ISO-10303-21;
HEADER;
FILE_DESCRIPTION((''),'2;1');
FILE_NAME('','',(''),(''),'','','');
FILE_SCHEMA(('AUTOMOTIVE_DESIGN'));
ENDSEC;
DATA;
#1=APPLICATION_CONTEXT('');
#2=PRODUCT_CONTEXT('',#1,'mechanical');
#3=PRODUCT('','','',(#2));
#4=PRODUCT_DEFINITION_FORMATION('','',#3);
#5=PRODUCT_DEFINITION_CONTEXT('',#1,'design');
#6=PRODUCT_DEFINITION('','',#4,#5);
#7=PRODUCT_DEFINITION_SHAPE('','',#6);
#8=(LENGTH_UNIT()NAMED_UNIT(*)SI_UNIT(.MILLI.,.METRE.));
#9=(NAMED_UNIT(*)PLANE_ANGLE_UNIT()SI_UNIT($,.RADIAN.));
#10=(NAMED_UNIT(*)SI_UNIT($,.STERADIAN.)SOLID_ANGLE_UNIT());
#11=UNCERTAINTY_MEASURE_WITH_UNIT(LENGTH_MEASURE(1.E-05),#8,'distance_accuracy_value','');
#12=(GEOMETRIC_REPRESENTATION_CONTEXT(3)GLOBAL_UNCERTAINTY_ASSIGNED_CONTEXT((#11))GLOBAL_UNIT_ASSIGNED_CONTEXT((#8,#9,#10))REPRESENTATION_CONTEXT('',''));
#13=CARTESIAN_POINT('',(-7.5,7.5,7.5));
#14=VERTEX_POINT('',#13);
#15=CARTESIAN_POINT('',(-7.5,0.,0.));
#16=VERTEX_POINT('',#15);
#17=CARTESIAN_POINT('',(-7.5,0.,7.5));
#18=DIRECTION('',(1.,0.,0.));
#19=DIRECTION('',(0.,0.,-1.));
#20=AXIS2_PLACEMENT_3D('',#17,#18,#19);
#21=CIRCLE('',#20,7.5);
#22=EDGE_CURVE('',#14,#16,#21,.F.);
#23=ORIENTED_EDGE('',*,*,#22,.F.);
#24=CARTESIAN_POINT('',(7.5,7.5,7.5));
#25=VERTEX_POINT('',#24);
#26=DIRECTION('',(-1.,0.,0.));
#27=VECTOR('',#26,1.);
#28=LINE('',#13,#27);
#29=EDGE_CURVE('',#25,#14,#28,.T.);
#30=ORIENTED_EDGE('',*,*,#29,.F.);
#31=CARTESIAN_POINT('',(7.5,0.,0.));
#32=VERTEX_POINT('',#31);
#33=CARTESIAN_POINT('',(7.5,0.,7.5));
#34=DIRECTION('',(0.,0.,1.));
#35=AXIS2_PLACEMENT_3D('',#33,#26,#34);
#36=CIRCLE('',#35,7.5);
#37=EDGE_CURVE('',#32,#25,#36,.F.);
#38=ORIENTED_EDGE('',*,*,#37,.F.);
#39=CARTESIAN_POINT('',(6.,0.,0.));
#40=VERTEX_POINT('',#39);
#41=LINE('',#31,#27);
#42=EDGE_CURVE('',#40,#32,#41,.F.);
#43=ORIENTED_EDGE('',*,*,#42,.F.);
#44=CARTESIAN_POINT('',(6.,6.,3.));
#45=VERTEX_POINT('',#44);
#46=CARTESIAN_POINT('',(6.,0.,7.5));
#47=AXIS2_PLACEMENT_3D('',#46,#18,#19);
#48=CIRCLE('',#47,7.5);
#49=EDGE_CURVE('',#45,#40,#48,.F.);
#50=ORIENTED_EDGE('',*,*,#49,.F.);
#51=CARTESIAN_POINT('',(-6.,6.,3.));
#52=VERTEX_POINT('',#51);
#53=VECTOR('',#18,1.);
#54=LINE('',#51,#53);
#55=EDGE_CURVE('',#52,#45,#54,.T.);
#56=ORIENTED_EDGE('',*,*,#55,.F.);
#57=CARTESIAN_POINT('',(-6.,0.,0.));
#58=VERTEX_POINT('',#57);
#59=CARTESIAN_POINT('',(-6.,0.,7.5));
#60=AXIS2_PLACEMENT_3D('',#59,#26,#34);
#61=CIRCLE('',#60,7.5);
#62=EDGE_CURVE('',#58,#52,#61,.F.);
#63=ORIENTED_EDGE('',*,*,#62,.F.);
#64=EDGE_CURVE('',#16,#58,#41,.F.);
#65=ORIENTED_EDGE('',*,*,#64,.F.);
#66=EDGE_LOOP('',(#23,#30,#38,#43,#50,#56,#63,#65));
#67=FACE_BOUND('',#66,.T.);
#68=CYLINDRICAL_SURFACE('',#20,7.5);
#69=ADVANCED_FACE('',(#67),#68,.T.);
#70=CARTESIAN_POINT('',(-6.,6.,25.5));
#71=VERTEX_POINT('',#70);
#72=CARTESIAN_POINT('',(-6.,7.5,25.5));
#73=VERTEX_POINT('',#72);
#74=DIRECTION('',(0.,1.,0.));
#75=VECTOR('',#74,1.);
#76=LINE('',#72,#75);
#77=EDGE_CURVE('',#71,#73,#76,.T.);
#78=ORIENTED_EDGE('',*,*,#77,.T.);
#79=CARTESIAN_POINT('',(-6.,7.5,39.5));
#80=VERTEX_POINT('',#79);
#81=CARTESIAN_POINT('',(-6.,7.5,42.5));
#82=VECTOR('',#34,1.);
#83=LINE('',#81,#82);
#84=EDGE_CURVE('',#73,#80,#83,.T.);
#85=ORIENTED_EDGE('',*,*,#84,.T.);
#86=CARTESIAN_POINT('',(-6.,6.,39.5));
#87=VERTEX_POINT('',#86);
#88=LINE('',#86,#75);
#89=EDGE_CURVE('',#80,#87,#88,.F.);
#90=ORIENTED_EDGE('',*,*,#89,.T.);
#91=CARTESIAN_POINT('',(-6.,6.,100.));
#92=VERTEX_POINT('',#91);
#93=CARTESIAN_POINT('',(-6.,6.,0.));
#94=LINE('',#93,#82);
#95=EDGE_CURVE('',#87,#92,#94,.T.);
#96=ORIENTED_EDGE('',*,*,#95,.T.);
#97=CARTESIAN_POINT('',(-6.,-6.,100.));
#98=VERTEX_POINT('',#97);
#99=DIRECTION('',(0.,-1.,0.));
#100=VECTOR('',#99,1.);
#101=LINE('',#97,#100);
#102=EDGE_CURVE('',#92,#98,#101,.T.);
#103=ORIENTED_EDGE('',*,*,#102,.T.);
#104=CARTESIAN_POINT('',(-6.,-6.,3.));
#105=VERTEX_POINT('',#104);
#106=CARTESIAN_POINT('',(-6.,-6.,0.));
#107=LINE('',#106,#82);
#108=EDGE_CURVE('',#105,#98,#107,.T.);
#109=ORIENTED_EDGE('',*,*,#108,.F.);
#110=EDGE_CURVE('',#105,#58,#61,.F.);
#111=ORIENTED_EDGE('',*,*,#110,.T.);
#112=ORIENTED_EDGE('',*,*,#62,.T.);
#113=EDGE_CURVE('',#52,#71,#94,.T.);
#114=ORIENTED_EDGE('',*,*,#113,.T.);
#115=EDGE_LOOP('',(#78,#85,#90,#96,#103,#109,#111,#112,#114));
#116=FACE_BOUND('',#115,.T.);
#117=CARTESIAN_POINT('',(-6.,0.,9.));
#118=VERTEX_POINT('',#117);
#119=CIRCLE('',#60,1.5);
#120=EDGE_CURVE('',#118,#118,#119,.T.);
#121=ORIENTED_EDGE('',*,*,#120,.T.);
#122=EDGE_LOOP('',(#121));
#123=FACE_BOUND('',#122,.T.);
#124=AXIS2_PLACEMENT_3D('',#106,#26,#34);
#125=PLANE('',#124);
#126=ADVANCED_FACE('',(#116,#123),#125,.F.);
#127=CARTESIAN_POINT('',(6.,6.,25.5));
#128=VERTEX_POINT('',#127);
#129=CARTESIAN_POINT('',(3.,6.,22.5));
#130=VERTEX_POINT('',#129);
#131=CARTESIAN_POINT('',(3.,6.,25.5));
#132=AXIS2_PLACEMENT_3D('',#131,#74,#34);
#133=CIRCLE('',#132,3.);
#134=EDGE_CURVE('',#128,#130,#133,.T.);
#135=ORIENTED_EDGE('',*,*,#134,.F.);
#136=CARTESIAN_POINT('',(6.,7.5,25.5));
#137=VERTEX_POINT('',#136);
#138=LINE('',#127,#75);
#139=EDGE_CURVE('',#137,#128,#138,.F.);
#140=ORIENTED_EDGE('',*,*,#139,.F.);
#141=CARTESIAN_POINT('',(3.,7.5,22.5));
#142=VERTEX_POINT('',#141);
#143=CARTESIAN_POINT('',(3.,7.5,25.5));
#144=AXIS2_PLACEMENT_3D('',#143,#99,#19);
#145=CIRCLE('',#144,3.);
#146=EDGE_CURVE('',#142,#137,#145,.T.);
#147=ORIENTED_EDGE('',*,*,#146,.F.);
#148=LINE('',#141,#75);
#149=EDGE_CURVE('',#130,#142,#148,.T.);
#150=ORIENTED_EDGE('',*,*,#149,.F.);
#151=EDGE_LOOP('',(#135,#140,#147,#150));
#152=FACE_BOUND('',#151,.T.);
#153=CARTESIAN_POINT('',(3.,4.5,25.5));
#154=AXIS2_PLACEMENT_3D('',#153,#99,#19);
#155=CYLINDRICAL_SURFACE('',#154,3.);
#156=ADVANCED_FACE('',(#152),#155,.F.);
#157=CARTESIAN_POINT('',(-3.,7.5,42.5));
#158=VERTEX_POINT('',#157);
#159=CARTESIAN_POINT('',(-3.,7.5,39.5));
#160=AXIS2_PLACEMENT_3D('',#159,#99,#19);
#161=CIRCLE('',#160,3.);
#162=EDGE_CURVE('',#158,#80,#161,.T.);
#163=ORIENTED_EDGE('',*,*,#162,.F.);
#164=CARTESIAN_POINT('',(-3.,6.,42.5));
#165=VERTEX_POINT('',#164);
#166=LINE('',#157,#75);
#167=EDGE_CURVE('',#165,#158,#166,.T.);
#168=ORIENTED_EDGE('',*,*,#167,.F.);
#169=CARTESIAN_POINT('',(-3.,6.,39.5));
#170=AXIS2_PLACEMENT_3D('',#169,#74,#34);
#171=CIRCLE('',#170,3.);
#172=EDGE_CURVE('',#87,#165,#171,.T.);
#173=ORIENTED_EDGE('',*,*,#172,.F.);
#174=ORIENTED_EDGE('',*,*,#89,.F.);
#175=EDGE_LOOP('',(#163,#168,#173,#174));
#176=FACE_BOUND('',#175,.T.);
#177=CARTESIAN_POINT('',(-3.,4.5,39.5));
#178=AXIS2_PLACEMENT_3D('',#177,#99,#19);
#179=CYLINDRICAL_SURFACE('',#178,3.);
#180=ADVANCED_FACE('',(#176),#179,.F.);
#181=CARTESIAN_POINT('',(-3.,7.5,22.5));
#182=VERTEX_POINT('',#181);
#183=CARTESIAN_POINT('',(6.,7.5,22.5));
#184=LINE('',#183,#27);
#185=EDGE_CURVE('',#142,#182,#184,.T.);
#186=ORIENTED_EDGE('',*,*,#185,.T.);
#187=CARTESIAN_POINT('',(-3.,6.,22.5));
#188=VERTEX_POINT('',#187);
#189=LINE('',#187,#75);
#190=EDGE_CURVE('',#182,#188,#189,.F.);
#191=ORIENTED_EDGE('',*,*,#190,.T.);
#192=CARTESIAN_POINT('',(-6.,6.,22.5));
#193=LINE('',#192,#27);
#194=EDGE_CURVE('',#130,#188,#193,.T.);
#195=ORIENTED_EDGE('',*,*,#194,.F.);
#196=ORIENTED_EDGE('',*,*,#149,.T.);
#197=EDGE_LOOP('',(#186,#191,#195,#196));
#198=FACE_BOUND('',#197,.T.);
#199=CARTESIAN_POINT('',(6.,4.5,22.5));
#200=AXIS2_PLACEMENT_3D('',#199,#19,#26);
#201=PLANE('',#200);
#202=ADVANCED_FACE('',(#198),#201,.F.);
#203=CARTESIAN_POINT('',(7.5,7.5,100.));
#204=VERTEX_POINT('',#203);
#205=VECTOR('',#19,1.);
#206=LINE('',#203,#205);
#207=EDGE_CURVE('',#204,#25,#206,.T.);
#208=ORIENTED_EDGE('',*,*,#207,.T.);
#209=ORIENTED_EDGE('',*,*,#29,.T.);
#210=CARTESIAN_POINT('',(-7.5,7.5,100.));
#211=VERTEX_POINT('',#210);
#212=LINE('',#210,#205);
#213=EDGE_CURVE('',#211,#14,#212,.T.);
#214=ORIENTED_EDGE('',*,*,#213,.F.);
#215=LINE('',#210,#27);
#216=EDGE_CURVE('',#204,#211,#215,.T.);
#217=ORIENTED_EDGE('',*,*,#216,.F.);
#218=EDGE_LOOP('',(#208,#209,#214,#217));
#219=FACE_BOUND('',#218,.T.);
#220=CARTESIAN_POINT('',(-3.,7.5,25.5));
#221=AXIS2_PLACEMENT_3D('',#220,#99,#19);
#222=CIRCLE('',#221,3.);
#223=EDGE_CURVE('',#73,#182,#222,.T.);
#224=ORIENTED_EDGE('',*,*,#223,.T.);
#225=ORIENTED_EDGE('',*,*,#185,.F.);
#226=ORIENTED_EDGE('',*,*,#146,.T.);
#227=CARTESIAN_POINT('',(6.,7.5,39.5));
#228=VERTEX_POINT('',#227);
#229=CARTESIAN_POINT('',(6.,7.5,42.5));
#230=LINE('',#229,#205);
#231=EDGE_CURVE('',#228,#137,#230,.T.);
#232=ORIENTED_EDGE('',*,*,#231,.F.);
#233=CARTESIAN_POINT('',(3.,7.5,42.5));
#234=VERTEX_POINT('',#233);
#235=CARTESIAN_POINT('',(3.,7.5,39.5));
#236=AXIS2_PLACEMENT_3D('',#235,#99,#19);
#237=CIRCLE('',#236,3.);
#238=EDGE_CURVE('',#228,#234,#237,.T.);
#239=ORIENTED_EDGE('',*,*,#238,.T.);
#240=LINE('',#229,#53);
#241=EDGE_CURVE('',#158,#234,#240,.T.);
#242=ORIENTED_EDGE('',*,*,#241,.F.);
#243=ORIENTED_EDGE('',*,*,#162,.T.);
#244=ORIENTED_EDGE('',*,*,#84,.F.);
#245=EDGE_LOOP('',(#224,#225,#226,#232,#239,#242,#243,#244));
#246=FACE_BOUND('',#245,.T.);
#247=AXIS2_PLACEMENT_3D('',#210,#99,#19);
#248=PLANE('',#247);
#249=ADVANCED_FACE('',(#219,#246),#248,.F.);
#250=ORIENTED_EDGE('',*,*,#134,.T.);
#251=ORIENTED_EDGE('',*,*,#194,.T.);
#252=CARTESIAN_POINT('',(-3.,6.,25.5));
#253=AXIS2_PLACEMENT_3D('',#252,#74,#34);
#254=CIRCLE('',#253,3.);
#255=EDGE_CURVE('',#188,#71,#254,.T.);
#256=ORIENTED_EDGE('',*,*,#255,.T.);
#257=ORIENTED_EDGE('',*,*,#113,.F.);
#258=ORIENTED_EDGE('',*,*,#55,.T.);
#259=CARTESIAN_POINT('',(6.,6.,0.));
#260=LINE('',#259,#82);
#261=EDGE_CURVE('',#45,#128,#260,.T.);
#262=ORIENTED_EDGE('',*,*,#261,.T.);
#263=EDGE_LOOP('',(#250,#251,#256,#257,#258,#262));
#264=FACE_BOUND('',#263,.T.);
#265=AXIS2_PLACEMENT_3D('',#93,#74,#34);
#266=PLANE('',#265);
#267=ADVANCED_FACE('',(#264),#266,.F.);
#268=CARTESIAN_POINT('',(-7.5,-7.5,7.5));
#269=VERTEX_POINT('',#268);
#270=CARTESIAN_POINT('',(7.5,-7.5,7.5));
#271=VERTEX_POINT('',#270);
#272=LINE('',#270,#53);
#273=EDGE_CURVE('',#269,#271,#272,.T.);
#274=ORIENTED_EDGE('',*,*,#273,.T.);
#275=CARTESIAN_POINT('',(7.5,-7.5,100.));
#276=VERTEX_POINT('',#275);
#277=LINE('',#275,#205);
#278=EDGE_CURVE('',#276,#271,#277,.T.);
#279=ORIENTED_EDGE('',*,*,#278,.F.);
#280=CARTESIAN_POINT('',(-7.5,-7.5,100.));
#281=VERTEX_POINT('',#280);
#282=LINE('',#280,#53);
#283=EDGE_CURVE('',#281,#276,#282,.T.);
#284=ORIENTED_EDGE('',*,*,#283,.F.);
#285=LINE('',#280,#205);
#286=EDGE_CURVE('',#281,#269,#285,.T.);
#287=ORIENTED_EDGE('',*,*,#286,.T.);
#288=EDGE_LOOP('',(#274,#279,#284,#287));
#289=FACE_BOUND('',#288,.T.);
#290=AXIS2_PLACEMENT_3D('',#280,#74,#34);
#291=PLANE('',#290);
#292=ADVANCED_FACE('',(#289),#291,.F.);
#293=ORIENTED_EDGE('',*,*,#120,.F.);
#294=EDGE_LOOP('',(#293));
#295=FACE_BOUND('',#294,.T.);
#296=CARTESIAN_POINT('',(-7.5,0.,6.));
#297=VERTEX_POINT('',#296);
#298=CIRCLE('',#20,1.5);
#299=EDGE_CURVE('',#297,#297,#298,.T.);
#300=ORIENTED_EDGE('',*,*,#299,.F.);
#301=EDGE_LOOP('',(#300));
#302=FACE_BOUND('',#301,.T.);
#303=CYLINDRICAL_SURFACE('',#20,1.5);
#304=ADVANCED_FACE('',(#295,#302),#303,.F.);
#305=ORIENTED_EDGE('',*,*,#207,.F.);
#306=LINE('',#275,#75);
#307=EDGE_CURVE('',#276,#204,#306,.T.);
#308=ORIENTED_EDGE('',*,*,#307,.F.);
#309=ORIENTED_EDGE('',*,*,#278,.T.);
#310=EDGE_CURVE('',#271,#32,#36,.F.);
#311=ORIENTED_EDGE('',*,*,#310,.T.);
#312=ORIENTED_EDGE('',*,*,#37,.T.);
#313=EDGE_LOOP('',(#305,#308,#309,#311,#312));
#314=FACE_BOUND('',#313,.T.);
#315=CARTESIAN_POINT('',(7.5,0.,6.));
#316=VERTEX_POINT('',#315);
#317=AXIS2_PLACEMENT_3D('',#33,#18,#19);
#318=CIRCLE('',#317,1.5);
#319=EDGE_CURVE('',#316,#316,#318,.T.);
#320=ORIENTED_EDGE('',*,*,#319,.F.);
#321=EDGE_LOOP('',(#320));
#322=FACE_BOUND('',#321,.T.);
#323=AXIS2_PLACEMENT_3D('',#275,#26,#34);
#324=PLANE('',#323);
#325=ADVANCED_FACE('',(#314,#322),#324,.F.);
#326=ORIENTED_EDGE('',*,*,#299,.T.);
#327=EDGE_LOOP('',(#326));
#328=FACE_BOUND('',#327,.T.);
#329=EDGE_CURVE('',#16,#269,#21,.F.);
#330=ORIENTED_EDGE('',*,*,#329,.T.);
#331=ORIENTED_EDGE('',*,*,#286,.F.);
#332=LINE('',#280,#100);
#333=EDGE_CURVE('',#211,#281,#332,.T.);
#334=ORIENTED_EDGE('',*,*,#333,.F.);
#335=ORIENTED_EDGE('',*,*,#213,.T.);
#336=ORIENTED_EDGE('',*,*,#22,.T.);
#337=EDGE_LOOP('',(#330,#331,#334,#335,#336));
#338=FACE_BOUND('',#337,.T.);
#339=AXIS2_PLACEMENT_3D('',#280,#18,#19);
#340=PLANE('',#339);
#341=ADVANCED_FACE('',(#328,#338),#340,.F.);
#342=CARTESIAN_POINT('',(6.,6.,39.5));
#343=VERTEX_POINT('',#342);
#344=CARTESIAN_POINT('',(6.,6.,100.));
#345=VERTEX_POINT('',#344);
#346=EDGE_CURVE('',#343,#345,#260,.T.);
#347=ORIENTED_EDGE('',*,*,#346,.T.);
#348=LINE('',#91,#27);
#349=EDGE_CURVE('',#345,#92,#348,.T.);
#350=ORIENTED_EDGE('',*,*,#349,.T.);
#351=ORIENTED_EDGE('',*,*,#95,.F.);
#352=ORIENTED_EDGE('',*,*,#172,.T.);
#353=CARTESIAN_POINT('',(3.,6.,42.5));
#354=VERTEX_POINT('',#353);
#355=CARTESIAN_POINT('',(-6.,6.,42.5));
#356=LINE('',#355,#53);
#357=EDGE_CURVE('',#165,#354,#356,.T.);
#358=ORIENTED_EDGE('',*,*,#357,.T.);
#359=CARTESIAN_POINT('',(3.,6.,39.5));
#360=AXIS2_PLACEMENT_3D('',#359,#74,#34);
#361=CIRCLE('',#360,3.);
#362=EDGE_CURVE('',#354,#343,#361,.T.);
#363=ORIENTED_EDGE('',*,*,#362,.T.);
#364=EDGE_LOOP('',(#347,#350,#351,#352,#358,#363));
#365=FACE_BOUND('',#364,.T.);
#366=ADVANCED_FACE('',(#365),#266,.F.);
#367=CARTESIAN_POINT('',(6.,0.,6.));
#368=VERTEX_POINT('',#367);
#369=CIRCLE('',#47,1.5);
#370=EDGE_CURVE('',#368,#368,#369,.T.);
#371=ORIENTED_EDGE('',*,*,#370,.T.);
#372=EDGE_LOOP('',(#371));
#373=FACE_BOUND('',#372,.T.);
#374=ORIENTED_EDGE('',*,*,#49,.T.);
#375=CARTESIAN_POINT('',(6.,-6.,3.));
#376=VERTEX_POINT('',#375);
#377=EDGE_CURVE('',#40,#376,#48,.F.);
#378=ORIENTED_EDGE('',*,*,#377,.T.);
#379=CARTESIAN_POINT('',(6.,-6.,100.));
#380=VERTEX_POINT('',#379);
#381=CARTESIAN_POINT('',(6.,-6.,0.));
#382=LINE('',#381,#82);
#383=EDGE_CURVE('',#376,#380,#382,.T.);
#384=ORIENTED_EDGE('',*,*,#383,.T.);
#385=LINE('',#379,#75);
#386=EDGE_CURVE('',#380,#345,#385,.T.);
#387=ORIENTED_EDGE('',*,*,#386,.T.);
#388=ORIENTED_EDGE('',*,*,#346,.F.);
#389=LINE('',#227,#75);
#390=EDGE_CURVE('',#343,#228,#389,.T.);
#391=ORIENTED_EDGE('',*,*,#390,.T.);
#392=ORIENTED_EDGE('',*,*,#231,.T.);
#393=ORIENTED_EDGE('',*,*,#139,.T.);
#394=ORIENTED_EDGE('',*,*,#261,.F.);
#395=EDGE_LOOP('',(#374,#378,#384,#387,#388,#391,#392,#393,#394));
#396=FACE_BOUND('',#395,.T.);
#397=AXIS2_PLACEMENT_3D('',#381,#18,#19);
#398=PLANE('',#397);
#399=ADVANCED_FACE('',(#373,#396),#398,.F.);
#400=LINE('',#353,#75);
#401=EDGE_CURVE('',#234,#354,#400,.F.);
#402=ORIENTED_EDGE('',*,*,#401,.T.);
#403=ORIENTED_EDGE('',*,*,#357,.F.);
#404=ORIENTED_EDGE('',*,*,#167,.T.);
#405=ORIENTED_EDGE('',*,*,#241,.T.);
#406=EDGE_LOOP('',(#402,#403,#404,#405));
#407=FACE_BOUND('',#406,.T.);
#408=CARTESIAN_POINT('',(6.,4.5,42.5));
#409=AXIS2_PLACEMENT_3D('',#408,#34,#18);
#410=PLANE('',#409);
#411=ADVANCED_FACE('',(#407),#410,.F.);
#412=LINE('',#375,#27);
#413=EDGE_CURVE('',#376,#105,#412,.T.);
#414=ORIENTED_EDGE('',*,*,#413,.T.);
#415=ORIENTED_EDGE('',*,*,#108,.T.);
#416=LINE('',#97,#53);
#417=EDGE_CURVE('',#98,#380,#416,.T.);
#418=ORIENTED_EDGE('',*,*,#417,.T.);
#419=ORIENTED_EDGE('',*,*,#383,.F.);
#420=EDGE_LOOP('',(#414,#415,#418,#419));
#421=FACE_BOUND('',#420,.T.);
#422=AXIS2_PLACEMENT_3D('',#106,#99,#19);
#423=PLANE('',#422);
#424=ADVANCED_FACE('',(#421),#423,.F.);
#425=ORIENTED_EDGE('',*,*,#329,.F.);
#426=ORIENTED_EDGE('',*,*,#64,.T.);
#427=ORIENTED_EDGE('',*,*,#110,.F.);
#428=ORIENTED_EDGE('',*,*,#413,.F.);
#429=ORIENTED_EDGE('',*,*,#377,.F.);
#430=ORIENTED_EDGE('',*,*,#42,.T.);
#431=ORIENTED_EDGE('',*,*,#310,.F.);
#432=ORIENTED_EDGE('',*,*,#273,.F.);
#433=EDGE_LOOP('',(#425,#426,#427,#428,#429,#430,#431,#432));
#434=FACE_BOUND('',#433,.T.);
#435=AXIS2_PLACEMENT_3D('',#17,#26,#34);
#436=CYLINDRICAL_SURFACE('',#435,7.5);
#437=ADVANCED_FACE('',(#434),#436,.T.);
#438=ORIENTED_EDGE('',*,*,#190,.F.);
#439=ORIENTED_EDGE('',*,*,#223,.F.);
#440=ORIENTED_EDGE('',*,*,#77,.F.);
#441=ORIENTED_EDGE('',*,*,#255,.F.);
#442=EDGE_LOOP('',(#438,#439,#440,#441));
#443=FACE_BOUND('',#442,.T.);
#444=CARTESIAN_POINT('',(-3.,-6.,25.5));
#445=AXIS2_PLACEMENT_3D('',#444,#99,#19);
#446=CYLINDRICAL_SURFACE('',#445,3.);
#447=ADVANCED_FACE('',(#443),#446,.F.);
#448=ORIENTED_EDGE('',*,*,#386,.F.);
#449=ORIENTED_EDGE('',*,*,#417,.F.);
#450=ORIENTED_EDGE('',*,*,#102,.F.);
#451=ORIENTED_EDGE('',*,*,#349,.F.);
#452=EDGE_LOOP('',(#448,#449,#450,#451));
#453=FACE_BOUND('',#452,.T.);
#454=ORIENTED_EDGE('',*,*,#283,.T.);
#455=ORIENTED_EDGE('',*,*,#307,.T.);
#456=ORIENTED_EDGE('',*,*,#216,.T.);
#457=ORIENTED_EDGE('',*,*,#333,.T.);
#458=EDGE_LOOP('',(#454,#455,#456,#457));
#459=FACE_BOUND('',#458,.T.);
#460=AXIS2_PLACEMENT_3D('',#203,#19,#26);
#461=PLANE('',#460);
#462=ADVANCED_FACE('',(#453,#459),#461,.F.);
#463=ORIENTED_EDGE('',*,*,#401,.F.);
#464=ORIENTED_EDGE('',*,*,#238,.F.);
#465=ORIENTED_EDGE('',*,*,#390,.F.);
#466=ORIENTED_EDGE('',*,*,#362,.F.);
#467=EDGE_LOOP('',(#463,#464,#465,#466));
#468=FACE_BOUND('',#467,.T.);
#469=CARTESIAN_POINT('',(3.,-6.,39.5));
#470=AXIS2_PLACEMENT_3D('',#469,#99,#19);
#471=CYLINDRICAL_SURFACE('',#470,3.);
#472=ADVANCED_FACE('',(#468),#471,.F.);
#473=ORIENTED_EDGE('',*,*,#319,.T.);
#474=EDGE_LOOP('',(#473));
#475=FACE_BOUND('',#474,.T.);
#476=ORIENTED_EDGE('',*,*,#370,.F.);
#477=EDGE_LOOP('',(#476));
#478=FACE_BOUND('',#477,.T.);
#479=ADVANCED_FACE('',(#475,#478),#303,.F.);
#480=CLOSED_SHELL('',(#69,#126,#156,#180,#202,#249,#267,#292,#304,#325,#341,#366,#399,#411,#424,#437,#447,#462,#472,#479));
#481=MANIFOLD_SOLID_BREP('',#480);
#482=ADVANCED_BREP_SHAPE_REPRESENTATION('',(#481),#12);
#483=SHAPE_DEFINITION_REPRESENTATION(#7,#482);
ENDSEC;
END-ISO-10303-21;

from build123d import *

# Parameters (mm, degrees)
ESQUISSE1_W             = 15
ESQUISSE1_H             = 15
EXTRUSION1_DEPTH        = 100
ESQUISSE2_W             = 12
ESQUISSE2_H             = 12
EXTRUSION2_DEPTH        = 101.560926806
CONG_1_R                = 7.5
ESQUISSE3_R             = 1.5
EXTRUSION3_DEPTH        = 102.396498953
ESQUISSE4_W             = 12
ESQUISSE4_H             = 20
ENL_V_MAT_EXTRU_1_DEPTH = 3
CONG_2_R                = 3


with BuildPart() as part:
    # Esquisse1 → Extrusion1 (new body)
    with BuildSketch(Plane.XY):
        Rectangle(ESQUISSE1_W, ESQUISSE1_H)
    extrude(amount=EXTRUSION1_DEPTH)

    # Esquisse2 → Extrusion2 (cut, through all)
    with BuildSketch(Plane.XY.offset(100)):
        Rectangle(ESQUISSE2_W, ESQUISSE2_H)
    extrude(amount=-EXTRUSION2_DEPTH, mode=Mode.SUBTRACT)

    # Congé1
    # the kernel refuses this fillet: 7.5 mm, written as the material it takes off along each edge
    with BuildSketch(Plane(origin=(-26.25, -7.5, 0), x_dir=(0, 0, 1), z_dir=(1, 0, 0))) as cong_1_piece_1:
        with BuildLine():
            CenterArc((CONG_1_R, -CONG_1_R), CONG_1_R, 90, 90)
            Line((0, -CONG_1_R), (0, 0))
            Line((0, 0), (CONG_1_R, 0))
        make_face()
    extrude(amount=52.5, mode=Mode.SUBTRACT)
    with BuildSketch(Plane(origin=(26.25, 7.5, 0), x_dir=(0, -1, 0), z_dir=(-1, 0, 0))) as cong_1_piece_2:
        with BuildLine():
            CenterArc((CONG_1_R, CONG_1_R), CONG_1_R, 180, 90)
            Line((0, CONG_1_R), (0, 0))
            Line((0, 0), (CONG_1_R, 0))
        make_face()
    extrude(amount=52.5, mode=Mode.SUBTRACT)

    # Esquisse3 → Extrusion3 (cut, through all)
    with BuildSketch(Plane(origin=(7.5, 0, 0), x_dir=(0, 0, -1), z_dir=(1, 0, 0))):
        with Locations((-7.5, 0)):
            Circle(ESQUISSE3_R)
    extrude(amount=-EXTRUSION3_DEPTH, mode=Mode.SUBTRACT)

    # Esquisse4 → Enlèv. mat.-Extru.1 (cut)
    with BuildSketch(Plane(origin=(0, 7.5, 0), x_dir=(-1, 0, 0), z_dir=(0, 1, 0))):
        with Locations((0, 32.5)):
            Rectangle(ESQUISSE4_W, ESQUISSE4_H)
    extrude(amount=-ENL_V_MAT_EXTRU_1_DEPTH, mode=Mode.SUBTRACT)

    # Congé2
    cong_2_edges = [part.edges().sort_by_distance(p)[0] for p in [
        (-6, 6.75, 42.5),
        (-6, 6.75, 22.5),
        (6, 6.75, 22.5),
        (6, 6.75, 42.5),
    ]]
    fillet(cong_2_edges, radius=CONG_2_R)


solid = part.part
